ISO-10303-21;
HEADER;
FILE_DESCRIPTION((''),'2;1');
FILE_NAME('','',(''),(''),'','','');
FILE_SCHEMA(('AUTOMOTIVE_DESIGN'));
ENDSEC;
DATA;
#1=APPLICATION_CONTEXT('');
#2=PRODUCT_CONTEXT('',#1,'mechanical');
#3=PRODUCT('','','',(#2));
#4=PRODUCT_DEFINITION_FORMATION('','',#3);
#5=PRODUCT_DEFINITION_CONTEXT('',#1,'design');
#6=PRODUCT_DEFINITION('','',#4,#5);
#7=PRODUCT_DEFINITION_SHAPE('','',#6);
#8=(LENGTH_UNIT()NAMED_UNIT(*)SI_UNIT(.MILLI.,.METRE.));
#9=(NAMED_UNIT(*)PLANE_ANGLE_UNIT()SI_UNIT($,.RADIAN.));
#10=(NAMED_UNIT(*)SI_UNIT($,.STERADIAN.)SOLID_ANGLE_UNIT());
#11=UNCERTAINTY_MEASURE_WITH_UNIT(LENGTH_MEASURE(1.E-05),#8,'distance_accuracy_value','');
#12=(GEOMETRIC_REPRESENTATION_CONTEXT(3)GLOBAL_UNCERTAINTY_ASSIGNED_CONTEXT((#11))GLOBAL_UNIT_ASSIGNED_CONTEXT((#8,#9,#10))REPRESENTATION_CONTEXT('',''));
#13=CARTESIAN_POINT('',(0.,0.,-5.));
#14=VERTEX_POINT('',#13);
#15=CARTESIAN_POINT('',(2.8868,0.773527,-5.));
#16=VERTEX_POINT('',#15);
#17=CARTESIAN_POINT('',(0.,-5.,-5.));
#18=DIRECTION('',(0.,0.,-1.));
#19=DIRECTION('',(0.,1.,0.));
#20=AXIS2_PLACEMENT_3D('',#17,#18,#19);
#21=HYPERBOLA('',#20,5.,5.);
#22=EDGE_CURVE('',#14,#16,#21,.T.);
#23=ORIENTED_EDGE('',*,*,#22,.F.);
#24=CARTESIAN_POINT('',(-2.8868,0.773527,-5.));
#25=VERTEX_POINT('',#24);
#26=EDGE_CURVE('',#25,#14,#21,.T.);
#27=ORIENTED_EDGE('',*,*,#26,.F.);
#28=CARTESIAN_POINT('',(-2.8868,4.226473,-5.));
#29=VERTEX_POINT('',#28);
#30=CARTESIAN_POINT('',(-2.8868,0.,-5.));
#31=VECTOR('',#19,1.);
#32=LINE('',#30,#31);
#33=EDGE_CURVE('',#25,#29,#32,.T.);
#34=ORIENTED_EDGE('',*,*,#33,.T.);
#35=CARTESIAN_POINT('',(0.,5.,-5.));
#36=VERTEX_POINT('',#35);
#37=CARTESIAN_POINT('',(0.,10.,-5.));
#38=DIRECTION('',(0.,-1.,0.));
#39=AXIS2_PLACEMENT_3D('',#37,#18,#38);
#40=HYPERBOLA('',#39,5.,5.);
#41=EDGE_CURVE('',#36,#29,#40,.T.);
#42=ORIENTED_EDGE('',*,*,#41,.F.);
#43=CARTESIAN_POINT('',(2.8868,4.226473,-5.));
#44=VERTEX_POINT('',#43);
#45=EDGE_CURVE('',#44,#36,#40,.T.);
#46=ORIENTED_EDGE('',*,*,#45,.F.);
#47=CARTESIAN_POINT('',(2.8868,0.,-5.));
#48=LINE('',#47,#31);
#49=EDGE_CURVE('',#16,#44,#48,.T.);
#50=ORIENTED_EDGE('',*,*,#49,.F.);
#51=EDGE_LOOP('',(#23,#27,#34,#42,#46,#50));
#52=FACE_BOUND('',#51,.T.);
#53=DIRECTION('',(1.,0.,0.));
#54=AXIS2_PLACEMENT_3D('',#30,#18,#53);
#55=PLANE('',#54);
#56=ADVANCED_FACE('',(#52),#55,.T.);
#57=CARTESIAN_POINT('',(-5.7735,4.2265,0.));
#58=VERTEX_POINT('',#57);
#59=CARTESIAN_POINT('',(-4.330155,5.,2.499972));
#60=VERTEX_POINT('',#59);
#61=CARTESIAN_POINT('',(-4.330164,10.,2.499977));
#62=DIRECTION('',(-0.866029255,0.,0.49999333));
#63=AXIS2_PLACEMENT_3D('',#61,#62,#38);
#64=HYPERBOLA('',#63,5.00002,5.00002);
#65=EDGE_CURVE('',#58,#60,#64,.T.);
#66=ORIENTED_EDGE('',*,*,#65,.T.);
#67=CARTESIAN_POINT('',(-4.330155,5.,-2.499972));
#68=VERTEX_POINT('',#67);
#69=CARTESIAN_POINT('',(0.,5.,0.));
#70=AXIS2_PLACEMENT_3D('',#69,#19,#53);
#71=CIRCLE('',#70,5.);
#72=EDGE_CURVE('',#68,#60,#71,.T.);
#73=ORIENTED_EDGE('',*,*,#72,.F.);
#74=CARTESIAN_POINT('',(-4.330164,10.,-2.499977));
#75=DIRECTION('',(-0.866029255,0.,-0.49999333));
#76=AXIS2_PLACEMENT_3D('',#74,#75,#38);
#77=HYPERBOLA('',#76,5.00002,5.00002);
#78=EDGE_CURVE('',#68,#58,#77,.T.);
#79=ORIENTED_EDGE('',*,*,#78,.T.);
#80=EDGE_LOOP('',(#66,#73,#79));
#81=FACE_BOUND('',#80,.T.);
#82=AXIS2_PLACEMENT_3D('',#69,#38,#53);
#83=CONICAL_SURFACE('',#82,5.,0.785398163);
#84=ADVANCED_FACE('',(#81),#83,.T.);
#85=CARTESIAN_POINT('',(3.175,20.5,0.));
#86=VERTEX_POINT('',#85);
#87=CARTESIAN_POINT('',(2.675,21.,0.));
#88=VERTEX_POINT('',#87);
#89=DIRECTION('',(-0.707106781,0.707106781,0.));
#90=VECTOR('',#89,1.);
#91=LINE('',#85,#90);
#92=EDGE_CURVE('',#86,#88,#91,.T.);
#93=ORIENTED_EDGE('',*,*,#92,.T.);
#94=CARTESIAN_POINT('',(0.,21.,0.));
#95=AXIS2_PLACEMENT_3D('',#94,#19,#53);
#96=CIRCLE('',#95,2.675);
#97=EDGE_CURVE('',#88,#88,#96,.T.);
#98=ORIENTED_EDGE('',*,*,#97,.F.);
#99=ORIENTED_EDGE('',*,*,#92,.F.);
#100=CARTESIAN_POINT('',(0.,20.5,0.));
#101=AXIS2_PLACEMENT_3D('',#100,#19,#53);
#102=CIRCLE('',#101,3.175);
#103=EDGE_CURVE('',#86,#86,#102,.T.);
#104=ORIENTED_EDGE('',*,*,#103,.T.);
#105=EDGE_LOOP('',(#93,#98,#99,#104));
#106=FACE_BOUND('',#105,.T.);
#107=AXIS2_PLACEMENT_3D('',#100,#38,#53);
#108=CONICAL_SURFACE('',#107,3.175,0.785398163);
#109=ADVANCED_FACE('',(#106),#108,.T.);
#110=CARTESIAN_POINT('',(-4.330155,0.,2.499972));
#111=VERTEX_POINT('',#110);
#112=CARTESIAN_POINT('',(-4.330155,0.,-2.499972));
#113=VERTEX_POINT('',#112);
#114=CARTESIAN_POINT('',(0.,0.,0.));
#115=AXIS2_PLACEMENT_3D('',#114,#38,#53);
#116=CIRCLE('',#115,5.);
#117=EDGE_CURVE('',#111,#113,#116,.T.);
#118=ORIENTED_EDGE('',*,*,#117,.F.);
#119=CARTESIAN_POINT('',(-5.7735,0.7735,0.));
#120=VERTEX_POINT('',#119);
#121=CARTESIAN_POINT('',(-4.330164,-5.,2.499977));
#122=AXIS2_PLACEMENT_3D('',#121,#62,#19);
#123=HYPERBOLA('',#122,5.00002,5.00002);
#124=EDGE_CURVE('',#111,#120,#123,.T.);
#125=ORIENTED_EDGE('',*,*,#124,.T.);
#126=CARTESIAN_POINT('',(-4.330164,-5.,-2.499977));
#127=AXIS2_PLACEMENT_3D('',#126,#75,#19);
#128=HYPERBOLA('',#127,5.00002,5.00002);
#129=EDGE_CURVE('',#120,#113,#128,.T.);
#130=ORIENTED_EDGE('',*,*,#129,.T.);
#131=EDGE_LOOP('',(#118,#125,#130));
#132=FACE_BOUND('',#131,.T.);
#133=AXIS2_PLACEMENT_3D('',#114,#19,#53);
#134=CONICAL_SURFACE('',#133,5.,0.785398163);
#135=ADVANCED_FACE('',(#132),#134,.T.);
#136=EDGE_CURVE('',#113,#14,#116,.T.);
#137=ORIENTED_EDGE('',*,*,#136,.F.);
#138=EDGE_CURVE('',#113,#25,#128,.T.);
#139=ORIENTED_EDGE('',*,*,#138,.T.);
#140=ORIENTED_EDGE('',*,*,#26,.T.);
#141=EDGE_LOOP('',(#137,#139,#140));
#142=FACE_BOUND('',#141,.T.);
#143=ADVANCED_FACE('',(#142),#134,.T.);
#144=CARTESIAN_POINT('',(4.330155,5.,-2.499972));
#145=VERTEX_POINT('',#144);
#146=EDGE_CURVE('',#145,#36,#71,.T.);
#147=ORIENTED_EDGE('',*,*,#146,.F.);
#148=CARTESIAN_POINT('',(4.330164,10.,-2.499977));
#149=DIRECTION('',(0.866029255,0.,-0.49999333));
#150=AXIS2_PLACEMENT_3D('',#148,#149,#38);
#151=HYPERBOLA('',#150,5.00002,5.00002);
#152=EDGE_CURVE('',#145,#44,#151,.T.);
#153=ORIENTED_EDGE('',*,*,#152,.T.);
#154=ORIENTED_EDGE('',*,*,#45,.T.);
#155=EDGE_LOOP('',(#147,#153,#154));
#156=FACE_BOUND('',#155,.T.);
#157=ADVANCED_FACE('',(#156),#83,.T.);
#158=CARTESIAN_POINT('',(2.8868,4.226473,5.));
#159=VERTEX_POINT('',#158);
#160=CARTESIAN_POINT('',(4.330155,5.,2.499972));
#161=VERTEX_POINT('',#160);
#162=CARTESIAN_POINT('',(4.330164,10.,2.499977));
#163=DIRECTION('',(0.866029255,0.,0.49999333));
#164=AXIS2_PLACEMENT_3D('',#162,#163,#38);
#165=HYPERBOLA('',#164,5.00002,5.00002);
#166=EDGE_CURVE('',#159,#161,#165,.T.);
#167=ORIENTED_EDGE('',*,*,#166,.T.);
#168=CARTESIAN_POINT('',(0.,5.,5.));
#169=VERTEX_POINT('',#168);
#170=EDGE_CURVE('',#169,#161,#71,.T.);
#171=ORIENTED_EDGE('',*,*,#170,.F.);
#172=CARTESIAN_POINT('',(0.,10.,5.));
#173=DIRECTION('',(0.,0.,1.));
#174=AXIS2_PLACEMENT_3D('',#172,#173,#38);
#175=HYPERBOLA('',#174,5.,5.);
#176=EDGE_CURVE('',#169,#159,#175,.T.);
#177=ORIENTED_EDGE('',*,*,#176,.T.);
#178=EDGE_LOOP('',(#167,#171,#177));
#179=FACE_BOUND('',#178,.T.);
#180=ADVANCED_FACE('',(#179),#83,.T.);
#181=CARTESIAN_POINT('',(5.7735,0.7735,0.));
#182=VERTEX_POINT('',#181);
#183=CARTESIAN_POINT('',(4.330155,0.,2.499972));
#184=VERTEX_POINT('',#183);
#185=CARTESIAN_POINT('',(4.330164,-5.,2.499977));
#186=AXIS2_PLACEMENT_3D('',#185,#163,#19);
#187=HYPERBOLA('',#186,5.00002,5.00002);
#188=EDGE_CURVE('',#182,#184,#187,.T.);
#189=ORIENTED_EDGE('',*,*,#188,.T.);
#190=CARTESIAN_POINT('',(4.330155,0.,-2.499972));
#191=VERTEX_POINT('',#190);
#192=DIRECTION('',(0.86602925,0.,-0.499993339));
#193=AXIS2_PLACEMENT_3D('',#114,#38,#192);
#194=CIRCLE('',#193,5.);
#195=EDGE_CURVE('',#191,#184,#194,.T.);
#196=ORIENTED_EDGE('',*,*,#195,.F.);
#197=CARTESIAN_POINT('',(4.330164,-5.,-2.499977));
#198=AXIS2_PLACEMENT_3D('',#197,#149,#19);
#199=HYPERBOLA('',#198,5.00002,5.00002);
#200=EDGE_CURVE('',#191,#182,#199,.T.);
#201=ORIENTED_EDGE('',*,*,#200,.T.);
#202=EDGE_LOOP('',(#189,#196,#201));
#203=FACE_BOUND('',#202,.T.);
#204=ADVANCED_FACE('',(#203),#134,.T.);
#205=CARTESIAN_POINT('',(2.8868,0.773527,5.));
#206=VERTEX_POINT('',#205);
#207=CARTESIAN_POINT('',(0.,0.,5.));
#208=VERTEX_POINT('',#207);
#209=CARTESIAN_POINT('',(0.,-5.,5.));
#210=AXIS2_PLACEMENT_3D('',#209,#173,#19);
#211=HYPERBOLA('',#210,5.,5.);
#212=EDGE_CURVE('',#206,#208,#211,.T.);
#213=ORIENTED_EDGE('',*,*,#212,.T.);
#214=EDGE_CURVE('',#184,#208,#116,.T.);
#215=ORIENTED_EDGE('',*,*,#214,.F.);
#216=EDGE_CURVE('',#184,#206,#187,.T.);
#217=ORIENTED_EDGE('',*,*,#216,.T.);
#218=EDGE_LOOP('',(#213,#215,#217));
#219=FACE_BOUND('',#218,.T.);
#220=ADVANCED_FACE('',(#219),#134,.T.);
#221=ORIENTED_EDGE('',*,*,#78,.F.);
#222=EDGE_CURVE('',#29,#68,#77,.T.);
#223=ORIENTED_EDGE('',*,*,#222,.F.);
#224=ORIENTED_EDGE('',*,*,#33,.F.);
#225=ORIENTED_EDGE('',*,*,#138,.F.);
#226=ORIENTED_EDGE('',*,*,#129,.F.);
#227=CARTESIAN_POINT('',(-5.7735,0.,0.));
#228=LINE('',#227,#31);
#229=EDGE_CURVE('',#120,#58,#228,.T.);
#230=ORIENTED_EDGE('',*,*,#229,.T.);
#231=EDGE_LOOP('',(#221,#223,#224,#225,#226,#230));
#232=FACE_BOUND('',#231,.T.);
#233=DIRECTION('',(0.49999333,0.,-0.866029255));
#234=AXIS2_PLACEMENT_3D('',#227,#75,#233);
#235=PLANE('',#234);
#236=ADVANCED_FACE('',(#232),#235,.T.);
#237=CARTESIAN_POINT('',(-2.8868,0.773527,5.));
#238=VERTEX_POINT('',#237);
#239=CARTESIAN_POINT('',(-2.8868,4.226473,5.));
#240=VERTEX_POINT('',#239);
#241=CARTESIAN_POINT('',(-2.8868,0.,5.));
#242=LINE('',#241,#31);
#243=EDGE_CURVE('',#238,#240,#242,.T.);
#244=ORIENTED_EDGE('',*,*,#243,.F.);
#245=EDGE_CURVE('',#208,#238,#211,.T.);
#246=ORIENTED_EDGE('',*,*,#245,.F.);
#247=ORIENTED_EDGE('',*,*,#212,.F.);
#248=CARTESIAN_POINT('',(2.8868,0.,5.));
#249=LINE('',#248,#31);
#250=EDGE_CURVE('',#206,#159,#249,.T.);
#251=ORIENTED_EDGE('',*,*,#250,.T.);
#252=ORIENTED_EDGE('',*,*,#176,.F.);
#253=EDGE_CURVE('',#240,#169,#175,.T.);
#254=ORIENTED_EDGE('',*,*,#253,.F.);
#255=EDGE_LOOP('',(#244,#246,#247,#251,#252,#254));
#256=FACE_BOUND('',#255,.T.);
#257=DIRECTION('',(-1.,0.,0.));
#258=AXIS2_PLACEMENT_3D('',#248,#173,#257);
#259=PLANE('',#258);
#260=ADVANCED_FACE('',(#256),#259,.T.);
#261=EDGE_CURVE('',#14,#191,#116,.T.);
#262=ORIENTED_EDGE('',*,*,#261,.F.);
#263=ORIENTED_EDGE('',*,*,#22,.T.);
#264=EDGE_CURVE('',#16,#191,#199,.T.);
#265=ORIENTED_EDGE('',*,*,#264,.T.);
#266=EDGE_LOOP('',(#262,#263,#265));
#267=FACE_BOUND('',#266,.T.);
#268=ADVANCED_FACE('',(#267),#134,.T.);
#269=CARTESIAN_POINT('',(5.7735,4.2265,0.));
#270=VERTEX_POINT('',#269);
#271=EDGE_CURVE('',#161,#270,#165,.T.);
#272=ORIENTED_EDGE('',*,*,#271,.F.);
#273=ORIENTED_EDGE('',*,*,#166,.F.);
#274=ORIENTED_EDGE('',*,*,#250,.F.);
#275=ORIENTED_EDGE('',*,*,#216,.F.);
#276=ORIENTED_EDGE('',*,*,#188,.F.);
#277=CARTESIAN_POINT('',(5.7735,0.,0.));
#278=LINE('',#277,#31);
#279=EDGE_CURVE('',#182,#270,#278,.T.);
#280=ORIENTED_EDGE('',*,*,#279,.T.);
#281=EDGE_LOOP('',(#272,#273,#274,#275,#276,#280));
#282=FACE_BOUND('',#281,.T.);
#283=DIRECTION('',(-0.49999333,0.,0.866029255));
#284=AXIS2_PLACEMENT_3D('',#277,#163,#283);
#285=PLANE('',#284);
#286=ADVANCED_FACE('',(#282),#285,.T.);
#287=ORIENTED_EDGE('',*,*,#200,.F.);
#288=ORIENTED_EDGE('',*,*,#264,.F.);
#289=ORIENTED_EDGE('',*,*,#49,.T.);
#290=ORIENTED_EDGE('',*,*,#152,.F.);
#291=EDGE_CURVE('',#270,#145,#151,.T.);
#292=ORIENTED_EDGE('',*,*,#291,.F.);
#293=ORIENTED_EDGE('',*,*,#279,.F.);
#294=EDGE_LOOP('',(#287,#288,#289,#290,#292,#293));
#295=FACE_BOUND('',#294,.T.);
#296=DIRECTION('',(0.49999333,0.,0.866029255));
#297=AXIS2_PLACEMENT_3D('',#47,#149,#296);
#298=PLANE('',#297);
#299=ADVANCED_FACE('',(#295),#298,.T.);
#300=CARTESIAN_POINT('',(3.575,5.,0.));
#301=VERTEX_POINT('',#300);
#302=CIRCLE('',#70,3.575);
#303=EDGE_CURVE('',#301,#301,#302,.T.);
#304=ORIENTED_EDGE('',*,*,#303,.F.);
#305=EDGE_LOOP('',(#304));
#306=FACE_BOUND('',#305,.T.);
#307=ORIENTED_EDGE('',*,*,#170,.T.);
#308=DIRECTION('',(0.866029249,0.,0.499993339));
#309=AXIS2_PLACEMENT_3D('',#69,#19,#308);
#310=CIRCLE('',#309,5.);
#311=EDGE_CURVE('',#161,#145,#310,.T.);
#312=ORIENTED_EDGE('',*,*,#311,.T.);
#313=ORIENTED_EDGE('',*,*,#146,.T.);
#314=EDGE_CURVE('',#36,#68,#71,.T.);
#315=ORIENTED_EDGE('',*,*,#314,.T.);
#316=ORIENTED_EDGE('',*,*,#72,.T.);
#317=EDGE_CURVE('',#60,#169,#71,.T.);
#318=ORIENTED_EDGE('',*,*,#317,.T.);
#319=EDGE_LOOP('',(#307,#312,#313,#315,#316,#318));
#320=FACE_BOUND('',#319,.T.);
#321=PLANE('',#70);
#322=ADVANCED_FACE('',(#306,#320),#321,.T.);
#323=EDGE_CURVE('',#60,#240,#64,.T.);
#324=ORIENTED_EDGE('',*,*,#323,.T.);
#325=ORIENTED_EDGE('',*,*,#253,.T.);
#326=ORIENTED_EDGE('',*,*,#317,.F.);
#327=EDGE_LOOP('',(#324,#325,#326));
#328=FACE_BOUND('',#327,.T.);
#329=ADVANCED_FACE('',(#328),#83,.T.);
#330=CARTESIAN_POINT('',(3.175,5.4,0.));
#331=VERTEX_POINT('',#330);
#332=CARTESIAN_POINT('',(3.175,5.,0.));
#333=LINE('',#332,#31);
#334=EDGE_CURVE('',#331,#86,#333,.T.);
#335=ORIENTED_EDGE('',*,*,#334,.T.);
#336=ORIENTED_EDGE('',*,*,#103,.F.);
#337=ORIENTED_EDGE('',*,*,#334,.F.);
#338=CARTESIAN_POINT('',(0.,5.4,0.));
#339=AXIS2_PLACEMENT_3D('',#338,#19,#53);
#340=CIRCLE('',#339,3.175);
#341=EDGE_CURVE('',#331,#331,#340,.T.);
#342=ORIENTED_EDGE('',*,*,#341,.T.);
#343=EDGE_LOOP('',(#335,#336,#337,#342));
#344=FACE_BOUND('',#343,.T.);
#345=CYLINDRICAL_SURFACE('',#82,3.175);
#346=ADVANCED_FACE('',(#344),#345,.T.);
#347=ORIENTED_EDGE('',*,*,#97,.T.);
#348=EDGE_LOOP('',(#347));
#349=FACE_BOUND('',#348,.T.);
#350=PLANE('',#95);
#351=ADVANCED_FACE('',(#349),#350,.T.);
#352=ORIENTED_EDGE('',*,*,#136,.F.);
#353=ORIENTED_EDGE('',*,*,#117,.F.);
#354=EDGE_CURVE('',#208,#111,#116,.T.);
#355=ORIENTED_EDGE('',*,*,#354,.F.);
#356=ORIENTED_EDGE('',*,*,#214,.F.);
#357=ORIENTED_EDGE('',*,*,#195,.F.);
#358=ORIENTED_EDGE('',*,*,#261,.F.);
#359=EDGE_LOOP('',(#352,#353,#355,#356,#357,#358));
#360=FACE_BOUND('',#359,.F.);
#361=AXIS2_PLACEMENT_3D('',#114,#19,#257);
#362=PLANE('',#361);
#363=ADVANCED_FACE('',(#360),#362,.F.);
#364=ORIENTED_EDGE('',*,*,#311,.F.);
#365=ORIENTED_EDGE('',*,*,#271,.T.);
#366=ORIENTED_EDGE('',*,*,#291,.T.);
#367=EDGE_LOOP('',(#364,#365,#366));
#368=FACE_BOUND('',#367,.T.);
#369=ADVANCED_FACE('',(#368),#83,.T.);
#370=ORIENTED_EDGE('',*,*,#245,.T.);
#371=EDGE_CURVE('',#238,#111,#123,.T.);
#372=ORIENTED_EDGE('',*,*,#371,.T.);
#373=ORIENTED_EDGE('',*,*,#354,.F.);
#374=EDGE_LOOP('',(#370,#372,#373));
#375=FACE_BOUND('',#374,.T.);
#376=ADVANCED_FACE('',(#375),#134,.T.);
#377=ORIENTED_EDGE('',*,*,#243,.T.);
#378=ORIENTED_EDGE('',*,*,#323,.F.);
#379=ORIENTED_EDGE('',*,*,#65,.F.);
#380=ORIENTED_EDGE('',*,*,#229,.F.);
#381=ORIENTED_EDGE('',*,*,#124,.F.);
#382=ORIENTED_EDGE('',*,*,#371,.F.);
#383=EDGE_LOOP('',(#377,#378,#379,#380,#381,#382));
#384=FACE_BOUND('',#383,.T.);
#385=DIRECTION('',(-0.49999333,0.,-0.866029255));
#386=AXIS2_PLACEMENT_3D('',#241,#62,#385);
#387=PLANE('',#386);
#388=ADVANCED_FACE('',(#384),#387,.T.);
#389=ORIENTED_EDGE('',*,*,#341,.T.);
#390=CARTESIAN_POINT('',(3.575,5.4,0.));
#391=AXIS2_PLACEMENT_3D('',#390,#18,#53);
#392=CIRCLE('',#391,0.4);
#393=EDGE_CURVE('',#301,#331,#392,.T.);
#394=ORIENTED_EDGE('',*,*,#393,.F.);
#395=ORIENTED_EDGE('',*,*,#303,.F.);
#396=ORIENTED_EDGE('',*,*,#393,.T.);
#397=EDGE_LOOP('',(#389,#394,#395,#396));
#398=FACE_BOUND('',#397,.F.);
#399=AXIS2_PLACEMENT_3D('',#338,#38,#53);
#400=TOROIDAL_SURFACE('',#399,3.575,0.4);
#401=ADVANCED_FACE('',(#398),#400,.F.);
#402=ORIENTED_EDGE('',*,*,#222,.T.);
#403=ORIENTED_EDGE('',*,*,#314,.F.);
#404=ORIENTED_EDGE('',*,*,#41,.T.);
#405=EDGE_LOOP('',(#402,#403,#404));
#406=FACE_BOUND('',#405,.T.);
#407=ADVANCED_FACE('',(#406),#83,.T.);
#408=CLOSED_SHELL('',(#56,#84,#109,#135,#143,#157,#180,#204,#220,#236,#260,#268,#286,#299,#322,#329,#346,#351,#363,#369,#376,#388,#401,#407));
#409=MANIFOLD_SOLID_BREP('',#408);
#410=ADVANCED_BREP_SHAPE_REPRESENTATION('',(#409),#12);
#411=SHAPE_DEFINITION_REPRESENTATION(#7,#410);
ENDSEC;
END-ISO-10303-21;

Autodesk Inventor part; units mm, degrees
ref_plane "YZ Plane" through (0, 0, 0) normal (1, 0, 0) x (0, 1, 0)
ref_plane "XZ Plane" through (0, 0, 0) normal (0, 1, 0) x (-1, 0, 0)
ref_plane "XY Plane" through (0, 0, 0) normal (0, 0, 1) x (1, 0, 0)
sketch "Esboço1" plane through (0, 0, 0) normal (0, 1, 0) x (-1, 0, 0)
  circle A0 centre (0, 0) radius 3
  line L0 (-2.8868, -5) -> (-5.7735, 0)
  line L1 (-5.7735, 0) -> (-2.8868, 5)
  line L2 (-2.8868, 5) -> (2.8868, 5)
  line L3 (2.8868, 5) -> (5.7735, 0)
  line L4 (5.7735, 0) -> (2.8868, -5)
  line L5 (2.8868, -5) -> (-2.8868, -5)
  dimension "d0" = 6
extrude "Extrusão1" add sketch "Esboço1" along normal blind 5
sketch "Esboço2" plane through (0, 0, 0) normal (1, 0, 0) x (0, 1, 0)
  point P0 (0, 0)
chamfer "Chanfro1" distance 0.5 angle 45 2 edges at (3, 0, 0) (3, 5, 0)
sketch "Esboço5" plane through (0, 0, 0) normal (0, -1, 0) x (1, 0, 0)
  circle A0 centre (0, 0) radius 5
extrude "Extrusão2" cut sketch "Esboço5" against normal through all draft 45 keep common part
sketch "Esboço6" plane through (0, 5, 0) normal (0, 1, 0) x (1, 0, 0)
  circle A0 centre (0, 0) radius 5
extrude "Extrusão3" cut sketch "Esboço6" against normal through all draft 45 keep common part
sketch "Esboço7" plane through (0, 5, 0) normal (0, 1, 0) x (1, 0, 0)
  circle A0 centre (0, 0) radius 3.5
extrude "Extrusão4" add sketch "Esboço7" against normal blind 5
sketch "Esboço8" plane through (0, 5, 0) normal (0, 1, 0) x (1, 0, 0)
  circle A0 centre (0, 0) radius 3.175
  dimension "d16" = 6.35
extrude "Extrusão5" add sketch "Esboço8" along normal blind 16
fillet "Arredondamento2" radius 0.4 1 edges at (-3.175, 5, 0)
chamfer "Chanfro3" distance 0.5 angle 45 1 edges at (-3.175, 21, 0)
thread "Rosca3" size "1/4-14" class "2B" standard "Inch Tapping Threads" full length
properties part number "porca m6" material "Aço inoxidável"
